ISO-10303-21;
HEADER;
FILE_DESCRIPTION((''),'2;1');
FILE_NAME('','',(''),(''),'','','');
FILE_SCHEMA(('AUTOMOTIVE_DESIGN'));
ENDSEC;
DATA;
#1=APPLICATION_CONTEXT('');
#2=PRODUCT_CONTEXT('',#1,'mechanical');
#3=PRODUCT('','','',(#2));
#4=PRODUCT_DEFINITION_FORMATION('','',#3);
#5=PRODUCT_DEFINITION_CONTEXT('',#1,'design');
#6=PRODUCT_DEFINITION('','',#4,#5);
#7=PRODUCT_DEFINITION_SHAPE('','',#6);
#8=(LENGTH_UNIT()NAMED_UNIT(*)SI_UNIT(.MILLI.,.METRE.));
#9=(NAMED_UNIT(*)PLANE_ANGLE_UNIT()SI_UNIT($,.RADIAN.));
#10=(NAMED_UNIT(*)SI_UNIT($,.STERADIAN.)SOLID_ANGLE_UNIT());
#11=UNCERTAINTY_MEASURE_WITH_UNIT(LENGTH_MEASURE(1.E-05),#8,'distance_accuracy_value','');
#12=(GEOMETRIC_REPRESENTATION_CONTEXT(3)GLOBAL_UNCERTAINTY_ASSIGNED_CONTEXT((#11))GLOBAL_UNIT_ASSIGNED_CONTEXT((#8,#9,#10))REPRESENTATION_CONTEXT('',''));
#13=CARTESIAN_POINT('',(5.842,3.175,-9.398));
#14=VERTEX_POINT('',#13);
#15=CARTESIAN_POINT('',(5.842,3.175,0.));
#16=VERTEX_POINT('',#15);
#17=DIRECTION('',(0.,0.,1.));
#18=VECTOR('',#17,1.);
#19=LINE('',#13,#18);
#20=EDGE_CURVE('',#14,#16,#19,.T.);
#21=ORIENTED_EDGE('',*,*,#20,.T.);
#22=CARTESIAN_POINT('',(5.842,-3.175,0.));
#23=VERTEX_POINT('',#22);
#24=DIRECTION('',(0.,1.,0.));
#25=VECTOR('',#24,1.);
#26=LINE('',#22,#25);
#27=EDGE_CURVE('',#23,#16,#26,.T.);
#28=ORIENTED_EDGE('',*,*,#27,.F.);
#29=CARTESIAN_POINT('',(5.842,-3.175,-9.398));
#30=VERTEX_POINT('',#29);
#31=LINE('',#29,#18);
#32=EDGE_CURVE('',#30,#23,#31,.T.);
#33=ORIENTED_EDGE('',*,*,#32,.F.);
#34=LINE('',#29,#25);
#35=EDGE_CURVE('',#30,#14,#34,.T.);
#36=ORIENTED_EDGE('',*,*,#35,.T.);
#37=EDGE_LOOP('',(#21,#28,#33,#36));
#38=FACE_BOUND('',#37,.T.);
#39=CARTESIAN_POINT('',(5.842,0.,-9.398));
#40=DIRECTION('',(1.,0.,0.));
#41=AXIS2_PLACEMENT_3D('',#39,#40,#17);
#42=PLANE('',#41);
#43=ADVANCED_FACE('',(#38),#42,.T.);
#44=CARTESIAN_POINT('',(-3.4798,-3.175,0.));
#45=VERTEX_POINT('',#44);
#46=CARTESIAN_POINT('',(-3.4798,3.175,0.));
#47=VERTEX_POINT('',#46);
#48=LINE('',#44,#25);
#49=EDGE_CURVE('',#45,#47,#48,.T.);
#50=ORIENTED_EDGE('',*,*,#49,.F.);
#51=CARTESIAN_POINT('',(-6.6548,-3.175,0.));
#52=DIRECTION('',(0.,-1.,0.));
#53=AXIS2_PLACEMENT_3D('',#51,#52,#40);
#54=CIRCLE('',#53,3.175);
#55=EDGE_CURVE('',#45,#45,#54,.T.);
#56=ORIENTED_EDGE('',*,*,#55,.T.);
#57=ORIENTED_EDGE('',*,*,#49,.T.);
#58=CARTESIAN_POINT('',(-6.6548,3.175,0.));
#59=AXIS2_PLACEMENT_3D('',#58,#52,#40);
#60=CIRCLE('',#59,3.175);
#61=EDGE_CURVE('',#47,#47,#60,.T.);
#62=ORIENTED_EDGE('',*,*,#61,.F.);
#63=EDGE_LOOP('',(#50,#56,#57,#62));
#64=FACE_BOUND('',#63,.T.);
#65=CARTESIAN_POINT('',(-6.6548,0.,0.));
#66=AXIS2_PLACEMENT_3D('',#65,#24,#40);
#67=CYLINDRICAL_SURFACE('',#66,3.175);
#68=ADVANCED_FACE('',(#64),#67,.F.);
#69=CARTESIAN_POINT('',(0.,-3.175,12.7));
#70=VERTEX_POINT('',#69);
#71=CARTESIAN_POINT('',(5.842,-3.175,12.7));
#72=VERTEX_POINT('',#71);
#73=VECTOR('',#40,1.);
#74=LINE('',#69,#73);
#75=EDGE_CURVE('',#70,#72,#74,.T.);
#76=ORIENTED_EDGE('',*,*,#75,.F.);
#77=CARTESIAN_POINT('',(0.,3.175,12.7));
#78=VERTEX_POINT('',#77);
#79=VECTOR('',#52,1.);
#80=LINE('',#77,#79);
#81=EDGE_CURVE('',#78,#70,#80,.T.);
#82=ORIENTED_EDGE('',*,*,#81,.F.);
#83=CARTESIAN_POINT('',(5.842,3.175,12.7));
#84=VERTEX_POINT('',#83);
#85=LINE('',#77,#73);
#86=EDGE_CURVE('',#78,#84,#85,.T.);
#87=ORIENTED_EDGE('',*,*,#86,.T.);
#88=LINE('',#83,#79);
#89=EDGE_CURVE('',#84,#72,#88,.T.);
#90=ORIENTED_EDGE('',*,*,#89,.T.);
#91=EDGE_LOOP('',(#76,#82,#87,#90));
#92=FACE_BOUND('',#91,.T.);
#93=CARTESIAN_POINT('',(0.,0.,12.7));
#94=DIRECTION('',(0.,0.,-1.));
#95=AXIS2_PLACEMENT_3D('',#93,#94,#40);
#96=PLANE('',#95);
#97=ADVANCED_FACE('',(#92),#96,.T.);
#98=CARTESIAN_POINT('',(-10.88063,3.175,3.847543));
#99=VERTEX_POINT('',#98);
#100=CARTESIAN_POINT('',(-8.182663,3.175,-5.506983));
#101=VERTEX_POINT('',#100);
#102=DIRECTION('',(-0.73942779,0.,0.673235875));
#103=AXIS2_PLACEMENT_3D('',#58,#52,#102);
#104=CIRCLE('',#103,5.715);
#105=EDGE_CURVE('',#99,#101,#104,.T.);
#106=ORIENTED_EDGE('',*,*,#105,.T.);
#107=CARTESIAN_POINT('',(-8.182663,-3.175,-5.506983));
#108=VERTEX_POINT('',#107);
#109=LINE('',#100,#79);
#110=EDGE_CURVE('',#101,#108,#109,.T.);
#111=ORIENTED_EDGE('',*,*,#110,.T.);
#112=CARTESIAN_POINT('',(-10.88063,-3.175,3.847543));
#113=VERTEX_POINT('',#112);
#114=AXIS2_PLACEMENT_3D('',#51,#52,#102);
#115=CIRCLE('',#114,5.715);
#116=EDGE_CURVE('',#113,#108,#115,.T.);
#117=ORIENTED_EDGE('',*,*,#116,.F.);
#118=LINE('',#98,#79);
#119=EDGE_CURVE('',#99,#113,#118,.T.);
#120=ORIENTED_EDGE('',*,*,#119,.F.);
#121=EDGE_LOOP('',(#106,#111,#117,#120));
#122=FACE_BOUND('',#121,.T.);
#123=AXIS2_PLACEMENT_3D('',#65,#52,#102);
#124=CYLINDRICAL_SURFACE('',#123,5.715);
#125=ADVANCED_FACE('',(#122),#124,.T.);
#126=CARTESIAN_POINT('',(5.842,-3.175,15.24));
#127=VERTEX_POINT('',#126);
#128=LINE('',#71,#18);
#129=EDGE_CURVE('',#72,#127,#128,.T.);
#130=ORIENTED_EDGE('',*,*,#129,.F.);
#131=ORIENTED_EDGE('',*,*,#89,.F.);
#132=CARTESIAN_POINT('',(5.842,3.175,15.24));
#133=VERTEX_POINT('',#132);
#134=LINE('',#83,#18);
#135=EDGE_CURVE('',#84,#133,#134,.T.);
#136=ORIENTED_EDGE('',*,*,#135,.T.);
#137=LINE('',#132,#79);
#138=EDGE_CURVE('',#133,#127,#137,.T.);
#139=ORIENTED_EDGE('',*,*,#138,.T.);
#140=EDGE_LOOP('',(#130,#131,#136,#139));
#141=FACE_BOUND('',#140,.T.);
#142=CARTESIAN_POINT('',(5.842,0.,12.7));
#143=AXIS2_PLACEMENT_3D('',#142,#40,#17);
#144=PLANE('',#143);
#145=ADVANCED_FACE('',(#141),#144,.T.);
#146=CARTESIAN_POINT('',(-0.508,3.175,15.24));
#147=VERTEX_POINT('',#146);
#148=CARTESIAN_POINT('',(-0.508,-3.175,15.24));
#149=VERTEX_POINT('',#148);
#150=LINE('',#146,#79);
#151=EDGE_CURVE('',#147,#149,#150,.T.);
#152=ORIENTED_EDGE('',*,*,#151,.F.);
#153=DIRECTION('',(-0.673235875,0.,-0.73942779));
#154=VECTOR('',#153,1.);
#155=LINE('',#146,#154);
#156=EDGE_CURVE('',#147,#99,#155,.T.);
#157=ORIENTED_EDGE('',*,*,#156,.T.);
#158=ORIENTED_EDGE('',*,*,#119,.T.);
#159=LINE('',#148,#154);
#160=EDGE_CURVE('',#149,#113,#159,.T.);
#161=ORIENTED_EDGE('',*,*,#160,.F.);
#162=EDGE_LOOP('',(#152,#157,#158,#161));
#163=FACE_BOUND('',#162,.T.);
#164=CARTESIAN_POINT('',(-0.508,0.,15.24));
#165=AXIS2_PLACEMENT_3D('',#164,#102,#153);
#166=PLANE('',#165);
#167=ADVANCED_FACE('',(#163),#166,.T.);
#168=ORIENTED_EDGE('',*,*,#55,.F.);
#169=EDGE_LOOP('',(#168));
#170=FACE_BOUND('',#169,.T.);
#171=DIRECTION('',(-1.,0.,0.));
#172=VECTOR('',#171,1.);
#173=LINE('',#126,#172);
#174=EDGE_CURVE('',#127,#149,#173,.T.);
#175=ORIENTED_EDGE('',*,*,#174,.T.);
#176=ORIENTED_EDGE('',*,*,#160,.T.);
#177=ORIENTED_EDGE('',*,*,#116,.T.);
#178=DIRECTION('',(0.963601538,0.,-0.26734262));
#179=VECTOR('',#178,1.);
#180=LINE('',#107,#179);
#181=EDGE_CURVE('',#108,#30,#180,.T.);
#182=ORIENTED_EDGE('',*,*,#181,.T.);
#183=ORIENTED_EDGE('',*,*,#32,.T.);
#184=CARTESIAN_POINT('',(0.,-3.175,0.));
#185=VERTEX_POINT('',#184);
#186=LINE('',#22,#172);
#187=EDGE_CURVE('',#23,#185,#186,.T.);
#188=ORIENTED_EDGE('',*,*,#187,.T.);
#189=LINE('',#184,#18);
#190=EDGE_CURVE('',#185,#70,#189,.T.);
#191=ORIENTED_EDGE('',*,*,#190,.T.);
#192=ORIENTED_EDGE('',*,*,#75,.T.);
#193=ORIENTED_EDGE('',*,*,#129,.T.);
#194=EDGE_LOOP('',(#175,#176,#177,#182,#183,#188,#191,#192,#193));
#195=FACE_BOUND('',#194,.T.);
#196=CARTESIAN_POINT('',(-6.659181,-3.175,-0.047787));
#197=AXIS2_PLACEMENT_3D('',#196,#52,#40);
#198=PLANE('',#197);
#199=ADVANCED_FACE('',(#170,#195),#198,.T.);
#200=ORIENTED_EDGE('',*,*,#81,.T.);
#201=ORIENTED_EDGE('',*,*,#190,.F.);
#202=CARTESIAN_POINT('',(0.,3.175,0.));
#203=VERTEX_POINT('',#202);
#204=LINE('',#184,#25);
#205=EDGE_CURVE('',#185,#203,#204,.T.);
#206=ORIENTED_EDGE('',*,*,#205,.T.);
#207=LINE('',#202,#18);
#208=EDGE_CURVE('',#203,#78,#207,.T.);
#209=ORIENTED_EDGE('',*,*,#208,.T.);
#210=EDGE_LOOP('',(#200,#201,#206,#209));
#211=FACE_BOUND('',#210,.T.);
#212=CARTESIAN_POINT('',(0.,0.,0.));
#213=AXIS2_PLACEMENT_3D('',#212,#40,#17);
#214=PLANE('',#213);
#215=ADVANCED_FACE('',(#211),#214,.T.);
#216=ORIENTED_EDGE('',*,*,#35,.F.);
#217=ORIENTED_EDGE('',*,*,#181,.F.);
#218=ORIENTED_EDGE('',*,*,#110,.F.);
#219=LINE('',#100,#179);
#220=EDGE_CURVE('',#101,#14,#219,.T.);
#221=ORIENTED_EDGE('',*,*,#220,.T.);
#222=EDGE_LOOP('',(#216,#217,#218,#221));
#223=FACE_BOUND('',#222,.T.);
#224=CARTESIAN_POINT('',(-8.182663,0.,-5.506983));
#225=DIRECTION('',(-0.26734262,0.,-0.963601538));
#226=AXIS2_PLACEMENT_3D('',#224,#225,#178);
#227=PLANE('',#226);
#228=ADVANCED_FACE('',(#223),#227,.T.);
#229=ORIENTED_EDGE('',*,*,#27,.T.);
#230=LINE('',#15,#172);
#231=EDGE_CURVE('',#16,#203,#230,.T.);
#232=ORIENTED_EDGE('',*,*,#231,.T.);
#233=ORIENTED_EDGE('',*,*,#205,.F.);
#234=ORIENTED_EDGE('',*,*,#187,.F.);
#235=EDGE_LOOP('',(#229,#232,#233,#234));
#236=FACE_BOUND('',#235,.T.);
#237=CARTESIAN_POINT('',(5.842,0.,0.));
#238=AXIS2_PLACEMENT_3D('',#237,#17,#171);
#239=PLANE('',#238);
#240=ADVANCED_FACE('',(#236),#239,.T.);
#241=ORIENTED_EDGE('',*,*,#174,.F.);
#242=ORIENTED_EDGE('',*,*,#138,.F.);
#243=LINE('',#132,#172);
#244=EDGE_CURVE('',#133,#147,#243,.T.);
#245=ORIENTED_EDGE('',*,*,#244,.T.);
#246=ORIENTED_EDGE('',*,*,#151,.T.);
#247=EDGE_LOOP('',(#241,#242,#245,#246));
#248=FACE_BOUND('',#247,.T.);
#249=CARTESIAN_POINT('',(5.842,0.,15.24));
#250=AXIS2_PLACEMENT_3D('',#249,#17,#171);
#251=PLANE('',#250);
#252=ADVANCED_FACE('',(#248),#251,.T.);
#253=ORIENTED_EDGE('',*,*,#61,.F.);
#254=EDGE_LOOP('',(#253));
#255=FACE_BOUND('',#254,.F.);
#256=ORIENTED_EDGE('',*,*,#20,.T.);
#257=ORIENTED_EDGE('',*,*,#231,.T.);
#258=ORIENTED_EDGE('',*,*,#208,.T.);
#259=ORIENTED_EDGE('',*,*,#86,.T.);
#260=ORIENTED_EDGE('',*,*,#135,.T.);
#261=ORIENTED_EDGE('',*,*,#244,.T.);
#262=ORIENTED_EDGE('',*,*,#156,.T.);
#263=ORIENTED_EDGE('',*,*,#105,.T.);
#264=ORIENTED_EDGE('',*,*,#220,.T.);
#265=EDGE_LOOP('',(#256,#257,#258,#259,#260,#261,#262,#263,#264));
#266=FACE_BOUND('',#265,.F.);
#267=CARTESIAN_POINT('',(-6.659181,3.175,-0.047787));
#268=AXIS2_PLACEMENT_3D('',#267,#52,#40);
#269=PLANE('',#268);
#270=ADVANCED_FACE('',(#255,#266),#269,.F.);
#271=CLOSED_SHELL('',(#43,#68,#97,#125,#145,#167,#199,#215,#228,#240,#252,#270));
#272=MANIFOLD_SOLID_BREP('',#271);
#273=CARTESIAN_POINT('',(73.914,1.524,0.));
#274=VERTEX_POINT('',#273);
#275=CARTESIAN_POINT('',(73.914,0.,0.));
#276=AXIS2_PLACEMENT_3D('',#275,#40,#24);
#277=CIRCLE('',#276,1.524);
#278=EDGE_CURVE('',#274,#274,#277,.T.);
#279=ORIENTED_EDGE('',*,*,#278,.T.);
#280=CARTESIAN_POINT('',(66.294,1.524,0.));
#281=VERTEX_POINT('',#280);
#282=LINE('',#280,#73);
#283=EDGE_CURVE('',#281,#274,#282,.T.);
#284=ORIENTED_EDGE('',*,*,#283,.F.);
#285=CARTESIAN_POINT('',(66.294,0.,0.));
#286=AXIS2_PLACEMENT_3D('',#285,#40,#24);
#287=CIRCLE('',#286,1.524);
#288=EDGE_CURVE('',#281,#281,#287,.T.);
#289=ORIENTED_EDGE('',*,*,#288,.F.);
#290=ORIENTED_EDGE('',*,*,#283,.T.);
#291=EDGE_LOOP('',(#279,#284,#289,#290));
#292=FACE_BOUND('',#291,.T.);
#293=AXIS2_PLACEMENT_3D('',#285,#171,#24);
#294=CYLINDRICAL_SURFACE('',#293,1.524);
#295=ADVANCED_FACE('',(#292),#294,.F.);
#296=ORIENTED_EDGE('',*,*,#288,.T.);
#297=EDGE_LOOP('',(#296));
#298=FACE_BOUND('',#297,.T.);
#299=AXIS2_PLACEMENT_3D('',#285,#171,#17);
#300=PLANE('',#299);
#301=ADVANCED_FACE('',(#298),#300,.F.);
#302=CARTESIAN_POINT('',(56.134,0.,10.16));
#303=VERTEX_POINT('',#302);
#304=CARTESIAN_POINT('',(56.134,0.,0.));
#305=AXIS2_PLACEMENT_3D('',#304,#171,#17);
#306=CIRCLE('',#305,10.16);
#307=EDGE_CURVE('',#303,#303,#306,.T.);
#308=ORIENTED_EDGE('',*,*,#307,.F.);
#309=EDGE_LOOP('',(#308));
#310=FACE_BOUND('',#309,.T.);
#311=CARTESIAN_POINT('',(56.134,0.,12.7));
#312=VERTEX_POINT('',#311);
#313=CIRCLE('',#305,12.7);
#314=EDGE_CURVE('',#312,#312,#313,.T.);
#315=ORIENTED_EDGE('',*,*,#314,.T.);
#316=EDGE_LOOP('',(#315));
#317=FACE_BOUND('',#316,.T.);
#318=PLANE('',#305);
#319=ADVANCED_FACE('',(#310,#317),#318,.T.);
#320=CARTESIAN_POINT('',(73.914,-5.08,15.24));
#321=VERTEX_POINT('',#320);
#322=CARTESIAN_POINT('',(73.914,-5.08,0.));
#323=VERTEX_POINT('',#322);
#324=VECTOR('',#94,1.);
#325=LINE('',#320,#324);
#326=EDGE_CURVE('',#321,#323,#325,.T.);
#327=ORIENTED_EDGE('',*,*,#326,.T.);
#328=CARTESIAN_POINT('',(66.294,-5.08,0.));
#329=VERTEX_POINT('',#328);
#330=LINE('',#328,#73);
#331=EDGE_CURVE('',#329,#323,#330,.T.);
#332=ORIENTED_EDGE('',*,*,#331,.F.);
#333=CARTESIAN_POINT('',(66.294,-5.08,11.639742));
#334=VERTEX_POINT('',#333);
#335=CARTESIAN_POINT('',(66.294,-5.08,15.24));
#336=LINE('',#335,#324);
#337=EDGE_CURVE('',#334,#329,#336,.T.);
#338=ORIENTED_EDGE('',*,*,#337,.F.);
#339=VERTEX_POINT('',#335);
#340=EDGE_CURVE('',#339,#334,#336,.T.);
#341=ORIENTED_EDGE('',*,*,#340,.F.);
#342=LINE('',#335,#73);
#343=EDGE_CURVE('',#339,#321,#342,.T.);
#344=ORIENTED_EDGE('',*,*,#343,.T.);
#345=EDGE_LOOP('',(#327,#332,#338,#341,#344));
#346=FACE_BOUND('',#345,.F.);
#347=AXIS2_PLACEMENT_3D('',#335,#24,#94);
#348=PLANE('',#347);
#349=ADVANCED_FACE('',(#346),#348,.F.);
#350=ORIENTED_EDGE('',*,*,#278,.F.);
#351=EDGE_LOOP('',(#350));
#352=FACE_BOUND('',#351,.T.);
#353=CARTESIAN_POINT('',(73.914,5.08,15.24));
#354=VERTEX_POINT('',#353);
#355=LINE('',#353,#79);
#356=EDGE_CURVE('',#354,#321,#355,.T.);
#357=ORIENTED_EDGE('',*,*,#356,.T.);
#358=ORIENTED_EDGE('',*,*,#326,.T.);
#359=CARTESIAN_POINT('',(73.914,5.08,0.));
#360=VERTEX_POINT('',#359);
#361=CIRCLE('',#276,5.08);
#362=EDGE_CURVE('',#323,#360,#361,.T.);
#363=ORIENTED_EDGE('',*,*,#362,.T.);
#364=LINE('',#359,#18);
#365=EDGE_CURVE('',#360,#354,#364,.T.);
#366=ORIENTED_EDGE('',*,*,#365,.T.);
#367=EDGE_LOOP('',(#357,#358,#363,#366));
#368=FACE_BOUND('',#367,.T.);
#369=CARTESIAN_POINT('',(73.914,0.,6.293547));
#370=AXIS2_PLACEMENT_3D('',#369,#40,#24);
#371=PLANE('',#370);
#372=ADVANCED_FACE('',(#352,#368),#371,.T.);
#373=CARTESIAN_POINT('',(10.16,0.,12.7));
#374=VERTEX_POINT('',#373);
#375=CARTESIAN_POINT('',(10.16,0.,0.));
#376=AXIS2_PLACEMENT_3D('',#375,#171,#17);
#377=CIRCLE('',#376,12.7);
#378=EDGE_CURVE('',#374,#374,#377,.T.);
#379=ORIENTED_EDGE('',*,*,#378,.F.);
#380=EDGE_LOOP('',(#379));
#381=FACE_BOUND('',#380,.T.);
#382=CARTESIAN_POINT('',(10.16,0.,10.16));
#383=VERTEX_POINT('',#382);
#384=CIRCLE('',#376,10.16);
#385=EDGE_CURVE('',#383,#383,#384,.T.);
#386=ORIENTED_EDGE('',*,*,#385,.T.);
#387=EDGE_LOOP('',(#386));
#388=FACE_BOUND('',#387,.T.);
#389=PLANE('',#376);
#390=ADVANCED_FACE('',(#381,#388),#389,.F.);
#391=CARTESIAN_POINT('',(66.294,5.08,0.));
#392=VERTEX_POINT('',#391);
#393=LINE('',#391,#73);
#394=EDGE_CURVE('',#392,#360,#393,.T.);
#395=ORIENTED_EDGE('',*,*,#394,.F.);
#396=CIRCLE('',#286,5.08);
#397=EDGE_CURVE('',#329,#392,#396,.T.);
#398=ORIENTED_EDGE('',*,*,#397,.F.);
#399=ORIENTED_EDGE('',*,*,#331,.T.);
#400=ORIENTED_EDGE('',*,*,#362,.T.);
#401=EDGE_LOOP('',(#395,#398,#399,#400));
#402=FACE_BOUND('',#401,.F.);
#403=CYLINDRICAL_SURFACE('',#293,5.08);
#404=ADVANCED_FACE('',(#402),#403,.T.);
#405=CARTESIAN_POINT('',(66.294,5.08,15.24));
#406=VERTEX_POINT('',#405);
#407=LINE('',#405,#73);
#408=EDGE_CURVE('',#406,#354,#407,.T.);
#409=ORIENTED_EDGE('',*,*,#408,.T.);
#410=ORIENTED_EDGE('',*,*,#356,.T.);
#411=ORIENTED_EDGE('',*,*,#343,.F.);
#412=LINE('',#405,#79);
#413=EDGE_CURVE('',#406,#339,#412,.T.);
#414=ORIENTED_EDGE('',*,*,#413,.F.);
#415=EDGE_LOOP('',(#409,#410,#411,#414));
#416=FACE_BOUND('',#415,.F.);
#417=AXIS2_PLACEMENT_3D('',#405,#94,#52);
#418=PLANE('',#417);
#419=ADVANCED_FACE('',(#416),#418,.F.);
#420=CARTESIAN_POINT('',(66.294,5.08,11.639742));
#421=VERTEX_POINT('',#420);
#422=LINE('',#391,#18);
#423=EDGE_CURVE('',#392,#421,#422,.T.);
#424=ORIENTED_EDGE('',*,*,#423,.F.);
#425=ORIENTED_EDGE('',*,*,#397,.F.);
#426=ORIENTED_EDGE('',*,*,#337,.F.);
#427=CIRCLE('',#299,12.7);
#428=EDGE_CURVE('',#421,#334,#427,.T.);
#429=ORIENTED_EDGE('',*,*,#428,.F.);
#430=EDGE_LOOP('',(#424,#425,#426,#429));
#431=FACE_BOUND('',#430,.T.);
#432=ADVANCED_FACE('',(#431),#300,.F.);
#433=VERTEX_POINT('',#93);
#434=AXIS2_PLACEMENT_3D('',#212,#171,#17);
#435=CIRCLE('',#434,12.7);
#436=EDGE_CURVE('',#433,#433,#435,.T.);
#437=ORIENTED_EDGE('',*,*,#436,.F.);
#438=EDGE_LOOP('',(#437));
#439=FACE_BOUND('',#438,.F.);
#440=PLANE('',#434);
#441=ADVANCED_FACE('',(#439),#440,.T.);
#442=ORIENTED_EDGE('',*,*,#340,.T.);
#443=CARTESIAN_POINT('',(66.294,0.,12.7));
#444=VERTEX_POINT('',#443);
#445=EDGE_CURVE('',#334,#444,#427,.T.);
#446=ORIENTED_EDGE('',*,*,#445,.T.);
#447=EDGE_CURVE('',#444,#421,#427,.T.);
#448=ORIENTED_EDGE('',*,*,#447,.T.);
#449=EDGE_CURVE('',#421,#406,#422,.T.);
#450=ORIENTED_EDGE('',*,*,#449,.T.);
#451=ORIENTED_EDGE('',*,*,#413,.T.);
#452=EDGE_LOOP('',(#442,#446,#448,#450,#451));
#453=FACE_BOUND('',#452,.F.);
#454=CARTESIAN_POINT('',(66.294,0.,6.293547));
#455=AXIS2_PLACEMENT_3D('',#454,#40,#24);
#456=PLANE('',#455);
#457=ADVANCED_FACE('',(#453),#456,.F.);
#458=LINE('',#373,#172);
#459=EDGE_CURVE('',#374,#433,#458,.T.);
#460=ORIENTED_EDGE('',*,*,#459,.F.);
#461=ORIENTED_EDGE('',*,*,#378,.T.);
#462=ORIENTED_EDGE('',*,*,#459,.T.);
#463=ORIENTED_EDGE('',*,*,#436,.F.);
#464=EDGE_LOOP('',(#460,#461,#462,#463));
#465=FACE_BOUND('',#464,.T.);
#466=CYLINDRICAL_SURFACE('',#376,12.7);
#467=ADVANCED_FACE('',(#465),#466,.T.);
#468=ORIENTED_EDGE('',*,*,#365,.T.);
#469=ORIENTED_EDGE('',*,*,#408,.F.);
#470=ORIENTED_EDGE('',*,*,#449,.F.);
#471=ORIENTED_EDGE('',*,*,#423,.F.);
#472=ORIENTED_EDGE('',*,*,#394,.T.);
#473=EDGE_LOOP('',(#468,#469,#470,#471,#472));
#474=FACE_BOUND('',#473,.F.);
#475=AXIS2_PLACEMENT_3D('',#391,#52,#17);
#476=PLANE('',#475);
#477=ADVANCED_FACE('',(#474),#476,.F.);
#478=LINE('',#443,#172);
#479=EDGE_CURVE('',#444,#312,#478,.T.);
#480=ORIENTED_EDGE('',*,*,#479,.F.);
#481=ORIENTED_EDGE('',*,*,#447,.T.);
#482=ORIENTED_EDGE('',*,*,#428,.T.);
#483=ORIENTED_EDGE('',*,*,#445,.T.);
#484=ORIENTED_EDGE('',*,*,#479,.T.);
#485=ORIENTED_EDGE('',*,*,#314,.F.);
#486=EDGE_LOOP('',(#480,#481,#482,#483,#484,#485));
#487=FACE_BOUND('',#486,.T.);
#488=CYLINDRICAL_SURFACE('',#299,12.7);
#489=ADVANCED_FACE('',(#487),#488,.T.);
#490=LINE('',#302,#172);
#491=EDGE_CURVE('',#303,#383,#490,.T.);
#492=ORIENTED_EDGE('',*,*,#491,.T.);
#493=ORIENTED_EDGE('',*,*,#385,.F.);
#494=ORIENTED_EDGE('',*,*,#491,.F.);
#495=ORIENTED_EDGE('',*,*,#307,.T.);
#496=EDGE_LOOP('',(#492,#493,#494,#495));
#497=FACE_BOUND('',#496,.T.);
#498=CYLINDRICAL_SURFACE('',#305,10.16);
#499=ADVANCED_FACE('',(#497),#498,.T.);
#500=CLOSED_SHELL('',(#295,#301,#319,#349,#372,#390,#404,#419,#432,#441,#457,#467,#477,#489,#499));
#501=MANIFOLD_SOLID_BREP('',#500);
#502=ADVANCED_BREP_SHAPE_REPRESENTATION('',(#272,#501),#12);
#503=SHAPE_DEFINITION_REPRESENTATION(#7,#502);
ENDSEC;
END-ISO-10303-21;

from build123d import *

# Parameters (mm, degrees)
F0_W     = 5.842
F0_H     = 12.7
F0_R     = 3.175
F2_DEPTH = 3.175
F3_R     = 1.524
F4_DEPTH = 7.62


# Not quite as in the source:
# - the program builds the solid bodies; features that only make, move or delete a surface that nothing else refers to are left out


with BuildPart() as f1:
    # F0 (on Front) → F1 (revolve)
    with BuildSketch(Plane.XZ):
        Polygon((5.842, 12.7), (5.842, 0), (66.294, 0), (66.294, 12.7), (56.134, 12.7), (56.134, 10.16), (10.16, 10.16), (10.16, 12.7), align=None)
        with Locations((2.921, 6.35)):
            Rectangle(F0_W, F0_H)
    revolve(axis=Axis((33.147, 0, 0), (-1, 0, 0)))

    # F3 (on face) → F4 (join)
    with BuildSketch(Plane.YZ.offset(66.294)):
        with BuildLine():
            ThreePointArc((-5.08, 0), (0, 5.08), (5.08, 0))
            Line((5.08, 0), (5.08, 11.6397422652))
            ThreePointArc((5.08, 11.6397422652), (0, 12.7), (-5.08, 11.6397422652))
            Line((-5.08, 11.6397422652), (-5.08, 0))
        make_face()
        with BuildLine():
            ThreePointArc((-5.08, 11.6397422652), (0, 12.7), (5.08, 11.6397422652))
            Line((5.08, 11.6397422652), (5.08, 15.24))
            Line((5.08, 15.24), (-5.08, 15.24))
            Line((-5.08, 15.24), (-5.08, 11.6397422652))
        make_face()
        with BuildLine():
            ThreePointArc((-5.08, 0), (0, -5.08), (5.08, 0))
            ThreePointArc((5.08, 0), (0, 5.08), (-5.08, 0))
        make_face()
        Circle(F3_R, mode=Mode.SUBTRACT)
    extrude(amount=F4_DEPTH)


with BuildPart() as f2:
    # F0 (on Front) → F2 (new body, symmetric)
    with BuildSketch(Plane.XZ):
        with BuildLine():
            ThreePointArc((-8.1826630726, -5.5069827884), (-3.1957909266, -4.5493385486), (-0.9398, 0))
            ThreePointArc((-0.9398, 0), (-4.5919612295, 5.3297205562), (-10.8806298187, 3.8475430269))
            ThreePointArc((-10.8806298187, 3.8475430269), (-12.1459778134, -1.5837270034), (-8.1826630726, -5.5069827884))
        make_face()
        with Locations((-6.6548, 0)):
            Circle(F0_R, mode=Mode.SUBTRACT)
        with BuildLine():
            Line((-0.9398, 0), (0, 0))
            Line((0, 0), (0, 12.7))
            Line((0, 12.7), (5.842, 12.7))
            Line((5.842, 12.7), (5.842, 15.24))
            Line((5.842, 15.24), (-0.508, 15.24))
            Line((-0.508, 15.24), (-10.8806298187, 3.8475430269))
            ThreePointArc((-10.8806298187, 3.8475430269), (-4.5919612295, 5.3297205562), (-0.9398, 0))
        make_face()
        with BuildLine():
            Line((5.842, 0), (0, 0))
            Line((0, 0), (-0.9398, 0))
            ThreePointArc((-0.9398, 0), (-3.1957909266, -4.5493385486), (-8.1826630726, -5.5069827884))
            Line((-8.1826630726, -5.5069827884), (5.842, -9.398))
            Line((5.842, -9.398), (5.842, 0))
        make_face()
    extrude(amount=F2_DEPTH, both=True)


solid = Compound([f1.part, f2.part])
